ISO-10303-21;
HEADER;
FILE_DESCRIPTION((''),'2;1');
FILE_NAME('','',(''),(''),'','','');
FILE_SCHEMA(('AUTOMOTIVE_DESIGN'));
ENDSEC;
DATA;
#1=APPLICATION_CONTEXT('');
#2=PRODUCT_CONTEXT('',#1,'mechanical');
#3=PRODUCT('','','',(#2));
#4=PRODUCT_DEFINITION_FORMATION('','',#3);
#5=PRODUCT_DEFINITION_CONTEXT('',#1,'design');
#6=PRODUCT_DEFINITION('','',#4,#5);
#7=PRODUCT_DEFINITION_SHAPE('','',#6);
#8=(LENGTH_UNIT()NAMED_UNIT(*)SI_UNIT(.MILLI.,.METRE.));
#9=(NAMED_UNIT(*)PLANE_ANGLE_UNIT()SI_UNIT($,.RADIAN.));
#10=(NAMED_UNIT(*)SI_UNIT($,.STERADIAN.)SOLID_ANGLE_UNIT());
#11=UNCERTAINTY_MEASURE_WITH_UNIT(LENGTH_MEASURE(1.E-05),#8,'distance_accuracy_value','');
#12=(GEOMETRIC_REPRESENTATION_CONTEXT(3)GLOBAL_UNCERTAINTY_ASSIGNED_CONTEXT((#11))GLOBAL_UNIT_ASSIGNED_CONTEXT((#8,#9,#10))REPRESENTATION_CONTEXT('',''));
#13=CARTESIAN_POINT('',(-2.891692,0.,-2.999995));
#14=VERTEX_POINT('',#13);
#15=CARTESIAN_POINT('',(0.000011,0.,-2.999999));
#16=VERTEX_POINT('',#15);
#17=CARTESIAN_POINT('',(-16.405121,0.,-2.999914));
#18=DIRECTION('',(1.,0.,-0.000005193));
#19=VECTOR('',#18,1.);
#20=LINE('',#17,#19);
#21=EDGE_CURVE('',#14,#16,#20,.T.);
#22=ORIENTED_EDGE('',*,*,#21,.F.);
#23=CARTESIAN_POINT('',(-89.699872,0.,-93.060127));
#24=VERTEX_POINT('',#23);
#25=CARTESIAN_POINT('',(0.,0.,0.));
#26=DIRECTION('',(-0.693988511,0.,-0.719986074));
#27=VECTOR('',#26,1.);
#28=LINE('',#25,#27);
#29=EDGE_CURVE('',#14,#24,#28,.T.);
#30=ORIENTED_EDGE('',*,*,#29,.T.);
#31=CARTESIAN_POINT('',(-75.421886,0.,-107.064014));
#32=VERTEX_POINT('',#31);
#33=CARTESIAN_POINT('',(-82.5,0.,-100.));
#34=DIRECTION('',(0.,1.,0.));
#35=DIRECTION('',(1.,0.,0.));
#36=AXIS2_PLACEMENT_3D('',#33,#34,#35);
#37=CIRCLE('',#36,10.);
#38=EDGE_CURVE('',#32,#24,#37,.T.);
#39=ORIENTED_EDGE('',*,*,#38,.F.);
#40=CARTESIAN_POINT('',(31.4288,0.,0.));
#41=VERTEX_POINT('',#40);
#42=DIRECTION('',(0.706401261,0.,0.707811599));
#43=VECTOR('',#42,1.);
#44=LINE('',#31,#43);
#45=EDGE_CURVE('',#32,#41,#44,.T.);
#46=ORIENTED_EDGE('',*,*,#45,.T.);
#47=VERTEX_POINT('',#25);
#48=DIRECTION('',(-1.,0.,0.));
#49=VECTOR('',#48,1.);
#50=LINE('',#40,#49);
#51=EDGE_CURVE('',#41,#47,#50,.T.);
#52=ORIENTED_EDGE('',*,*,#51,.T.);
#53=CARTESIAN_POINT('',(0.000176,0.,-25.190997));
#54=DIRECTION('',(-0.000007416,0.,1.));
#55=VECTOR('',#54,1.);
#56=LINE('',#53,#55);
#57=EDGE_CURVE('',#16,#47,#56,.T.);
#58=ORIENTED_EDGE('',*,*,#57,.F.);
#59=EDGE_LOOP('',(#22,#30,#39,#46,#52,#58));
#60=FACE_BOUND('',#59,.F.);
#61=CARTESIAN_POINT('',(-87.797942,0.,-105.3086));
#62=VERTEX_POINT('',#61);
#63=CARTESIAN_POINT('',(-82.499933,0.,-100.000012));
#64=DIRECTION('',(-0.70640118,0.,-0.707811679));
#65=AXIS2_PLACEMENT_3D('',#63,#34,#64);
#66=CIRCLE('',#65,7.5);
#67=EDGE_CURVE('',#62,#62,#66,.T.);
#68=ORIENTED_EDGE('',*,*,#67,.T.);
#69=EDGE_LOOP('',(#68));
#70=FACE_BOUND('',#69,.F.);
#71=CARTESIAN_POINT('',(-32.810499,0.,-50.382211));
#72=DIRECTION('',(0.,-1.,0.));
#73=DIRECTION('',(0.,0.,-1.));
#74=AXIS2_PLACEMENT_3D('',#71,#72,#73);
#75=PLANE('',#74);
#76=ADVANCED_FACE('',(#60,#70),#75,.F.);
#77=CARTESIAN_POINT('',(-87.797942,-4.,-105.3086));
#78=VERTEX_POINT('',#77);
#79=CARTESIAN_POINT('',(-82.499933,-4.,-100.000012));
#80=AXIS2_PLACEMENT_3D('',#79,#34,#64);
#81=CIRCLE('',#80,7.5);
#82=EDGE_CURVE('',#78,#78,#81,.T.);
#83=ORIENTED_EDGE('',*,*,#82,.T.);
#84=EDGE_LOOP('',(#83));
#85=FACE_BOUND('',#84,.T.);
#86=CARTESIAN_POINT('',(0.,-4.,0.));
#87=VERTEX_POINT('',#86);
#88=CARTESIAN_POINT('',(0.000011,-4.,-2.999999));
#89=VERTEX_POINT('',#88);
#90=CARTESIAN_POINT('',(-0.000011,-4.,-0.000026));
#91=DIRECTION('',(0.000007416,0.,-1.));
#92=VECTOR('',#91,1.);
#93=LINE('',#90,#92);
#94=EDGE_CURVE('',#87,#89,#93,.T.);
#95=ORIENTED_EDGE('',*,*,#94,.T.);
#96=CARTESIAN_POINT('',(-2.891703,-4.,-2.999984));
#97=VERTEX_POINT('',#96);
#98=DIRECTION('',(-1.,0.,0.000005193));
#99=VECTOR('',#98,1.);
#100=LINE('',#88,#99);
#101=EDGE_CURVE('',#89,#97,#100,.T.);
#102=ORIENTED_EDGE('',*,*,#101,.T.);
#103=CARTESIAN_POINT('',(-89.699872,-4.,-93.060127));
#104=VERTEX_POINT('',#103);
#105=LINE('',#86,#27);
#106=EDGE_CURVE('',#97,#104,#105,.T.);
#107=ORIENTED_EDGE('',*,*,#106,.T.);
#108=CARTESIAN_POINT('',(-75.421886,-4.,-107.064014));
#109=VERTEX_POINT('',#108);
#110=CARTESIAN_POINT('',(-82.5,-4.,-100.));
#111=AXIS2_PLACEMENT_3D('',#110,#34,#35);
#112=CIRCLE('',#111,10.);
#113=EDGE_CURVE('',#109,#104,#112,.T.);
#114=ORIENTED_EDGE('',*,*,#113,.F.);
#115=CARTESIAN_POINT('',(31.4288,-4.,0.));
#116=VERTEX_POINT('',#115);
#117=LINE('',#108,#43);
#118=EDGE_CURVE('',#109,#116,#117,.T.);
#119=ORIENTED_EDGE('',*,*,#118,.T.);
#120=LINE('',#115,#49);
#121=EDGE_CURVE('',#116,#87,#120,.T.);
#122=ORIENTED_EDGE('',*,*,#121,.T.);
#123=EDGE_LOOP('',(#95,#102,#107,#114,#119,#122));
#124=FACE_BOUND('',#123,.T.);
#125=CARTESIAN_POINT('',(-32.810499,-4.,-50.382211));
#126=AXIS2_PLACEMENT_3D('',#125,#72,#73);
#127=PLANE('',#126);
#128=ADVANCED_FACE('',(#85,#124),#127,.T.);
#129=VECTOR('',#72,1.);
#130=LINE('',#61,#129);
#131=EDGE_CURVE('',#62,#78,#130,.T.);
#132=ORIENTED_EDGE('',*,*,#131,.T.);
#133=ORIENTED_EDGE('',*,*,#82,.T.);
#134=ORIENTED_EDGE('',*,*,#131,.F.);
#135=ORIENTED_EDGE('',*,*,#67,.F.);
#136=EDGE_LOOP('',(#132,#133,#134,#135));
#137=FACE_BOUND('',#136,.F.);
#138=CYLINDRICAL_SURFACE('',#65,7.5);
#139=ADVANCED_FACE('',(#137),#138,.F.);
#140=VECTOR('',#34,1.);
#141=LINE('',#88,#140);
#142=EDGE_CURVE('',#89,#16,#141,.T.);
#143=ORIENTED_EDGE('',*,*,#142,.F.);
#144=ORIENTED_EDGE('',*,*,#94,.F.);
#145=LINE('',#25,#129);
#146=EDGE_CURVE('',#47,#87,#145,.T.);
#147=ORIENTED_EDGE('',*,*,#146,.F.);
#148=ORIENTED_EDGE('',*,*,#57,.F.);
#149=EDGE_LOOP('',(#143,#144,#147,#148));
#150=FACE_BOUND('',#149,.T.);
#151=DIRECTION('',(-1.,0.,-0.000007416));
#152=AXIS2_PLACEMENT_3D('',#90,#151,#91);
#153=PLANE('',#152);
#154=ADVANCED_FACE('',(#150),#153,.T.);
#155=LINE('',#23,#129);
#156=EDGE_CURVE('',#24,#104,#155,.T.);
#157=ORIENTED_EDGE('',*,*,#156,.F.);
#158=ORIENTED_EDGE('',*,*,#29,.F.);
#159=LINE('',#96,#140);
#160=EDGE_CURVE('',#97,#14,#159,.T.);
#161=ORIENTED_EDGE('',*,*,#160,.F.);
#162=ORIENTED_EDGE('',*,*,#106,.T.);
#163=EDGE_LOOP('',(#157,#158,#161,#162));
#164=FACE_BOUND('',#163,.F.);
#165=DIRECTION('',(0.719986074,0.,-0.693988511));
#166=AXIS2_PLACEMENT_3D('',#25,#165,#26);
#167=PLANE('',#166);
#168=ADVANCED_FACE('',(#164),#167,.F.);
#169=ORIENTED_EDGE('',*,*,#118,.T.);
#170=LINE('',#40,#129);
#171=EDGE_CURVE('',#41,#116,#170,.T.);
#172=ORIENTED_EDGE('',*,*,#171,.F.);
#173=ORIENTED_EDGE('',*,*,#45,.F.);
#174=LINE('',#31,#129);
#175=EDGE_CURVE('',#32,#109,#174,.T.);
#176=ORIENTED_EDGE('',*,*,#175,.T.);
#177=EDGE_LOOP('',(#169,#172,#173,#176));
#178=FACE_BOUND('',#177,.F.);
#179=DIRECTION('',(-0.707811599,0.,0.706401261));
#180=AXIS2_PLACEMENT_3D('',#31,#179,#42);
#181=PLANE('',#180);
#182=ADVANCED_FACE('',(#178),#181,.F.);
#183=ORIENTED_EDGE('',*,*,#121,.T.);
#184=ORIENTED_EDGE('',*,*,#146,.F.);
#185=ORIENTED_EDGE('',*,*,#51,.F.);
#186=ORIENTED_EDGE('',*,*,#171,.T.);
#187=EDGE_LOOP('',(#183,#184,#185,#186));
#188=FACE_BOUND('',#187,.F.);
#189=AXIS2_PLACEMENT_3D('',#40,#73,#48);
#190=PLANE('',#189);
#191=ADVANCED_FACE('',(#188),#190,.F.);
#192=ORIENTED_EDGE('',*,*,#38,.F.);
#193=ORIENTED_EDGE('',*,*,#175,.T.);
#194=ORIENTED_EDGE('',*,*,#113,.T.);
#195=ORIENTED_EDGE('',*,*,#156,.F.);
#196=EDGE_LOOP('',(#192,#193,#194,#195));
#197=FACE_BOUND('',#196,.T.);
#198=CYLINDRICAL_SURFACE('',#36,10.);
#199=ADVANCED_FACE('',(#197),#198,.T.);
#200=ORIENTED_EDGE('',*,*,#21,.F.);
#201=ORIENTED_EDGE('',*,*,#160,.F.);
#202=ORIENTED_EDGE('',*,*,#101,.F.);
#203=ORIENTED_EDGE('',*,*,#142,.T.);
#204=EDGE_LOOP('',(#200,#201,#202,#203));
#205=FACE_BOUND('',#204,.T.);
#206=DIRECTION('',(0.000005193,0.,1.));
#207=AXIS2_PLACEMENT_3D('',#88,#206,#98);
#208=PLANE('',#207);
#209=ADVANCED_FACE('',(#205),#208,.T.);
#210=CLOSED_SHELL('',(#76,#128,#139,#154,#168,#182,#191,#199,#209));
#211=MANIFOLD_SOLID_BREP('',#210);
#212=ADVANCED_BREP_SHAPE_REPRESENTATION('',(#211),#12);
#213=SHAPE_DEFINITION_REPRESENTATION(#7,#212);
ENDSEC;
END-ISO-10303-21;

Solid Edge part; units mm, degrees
sketch "Sketch1" plane through (0, 0, 0) normal (0, -1, 0) x (1, 0, 0)
  line L0 (0, 0) -> (-89.6999, -93.0601)
  line L1 (-75.4219, -107.064) -> (31.4288, 0)
  line L2 (31.4288, 0) -> (0, 0)
  arc A0 (-75.4219, -107.064) -> (-89.6999, -93.0601) centre (-82.5, -100) cw
extrude "Protrusion1" add sketch "Sketch1" along normal blind 4
sketch "Sketch2" plane through (-30.5356, 0, -55) normal (0, 1, 0) x (-0.7064012, 0, -0.7078117)
  circle A0 centre (68.5592, 4.9929) radius 7.5
extrude "Cutout1" cut sketch "Sketch2" against normal up to next
sketch "Sketch3" plane through (-30.5356, -4, -55) normal (0, -1, 0) x (0.7064012, 0, 0.7078117)
  line L0 (58.3766, 15.1194) -> (56.3339, 17.1662)
  line L1 (56.3339, 17.1662) -> (60.5, 17.2386)
  line L2 (60.5, 17.2386) -> (58.3766, 15.1194)
extrude "Cutout2" cut sketch "Sketch3" against normal up to next
properties material "Stainless steel"
